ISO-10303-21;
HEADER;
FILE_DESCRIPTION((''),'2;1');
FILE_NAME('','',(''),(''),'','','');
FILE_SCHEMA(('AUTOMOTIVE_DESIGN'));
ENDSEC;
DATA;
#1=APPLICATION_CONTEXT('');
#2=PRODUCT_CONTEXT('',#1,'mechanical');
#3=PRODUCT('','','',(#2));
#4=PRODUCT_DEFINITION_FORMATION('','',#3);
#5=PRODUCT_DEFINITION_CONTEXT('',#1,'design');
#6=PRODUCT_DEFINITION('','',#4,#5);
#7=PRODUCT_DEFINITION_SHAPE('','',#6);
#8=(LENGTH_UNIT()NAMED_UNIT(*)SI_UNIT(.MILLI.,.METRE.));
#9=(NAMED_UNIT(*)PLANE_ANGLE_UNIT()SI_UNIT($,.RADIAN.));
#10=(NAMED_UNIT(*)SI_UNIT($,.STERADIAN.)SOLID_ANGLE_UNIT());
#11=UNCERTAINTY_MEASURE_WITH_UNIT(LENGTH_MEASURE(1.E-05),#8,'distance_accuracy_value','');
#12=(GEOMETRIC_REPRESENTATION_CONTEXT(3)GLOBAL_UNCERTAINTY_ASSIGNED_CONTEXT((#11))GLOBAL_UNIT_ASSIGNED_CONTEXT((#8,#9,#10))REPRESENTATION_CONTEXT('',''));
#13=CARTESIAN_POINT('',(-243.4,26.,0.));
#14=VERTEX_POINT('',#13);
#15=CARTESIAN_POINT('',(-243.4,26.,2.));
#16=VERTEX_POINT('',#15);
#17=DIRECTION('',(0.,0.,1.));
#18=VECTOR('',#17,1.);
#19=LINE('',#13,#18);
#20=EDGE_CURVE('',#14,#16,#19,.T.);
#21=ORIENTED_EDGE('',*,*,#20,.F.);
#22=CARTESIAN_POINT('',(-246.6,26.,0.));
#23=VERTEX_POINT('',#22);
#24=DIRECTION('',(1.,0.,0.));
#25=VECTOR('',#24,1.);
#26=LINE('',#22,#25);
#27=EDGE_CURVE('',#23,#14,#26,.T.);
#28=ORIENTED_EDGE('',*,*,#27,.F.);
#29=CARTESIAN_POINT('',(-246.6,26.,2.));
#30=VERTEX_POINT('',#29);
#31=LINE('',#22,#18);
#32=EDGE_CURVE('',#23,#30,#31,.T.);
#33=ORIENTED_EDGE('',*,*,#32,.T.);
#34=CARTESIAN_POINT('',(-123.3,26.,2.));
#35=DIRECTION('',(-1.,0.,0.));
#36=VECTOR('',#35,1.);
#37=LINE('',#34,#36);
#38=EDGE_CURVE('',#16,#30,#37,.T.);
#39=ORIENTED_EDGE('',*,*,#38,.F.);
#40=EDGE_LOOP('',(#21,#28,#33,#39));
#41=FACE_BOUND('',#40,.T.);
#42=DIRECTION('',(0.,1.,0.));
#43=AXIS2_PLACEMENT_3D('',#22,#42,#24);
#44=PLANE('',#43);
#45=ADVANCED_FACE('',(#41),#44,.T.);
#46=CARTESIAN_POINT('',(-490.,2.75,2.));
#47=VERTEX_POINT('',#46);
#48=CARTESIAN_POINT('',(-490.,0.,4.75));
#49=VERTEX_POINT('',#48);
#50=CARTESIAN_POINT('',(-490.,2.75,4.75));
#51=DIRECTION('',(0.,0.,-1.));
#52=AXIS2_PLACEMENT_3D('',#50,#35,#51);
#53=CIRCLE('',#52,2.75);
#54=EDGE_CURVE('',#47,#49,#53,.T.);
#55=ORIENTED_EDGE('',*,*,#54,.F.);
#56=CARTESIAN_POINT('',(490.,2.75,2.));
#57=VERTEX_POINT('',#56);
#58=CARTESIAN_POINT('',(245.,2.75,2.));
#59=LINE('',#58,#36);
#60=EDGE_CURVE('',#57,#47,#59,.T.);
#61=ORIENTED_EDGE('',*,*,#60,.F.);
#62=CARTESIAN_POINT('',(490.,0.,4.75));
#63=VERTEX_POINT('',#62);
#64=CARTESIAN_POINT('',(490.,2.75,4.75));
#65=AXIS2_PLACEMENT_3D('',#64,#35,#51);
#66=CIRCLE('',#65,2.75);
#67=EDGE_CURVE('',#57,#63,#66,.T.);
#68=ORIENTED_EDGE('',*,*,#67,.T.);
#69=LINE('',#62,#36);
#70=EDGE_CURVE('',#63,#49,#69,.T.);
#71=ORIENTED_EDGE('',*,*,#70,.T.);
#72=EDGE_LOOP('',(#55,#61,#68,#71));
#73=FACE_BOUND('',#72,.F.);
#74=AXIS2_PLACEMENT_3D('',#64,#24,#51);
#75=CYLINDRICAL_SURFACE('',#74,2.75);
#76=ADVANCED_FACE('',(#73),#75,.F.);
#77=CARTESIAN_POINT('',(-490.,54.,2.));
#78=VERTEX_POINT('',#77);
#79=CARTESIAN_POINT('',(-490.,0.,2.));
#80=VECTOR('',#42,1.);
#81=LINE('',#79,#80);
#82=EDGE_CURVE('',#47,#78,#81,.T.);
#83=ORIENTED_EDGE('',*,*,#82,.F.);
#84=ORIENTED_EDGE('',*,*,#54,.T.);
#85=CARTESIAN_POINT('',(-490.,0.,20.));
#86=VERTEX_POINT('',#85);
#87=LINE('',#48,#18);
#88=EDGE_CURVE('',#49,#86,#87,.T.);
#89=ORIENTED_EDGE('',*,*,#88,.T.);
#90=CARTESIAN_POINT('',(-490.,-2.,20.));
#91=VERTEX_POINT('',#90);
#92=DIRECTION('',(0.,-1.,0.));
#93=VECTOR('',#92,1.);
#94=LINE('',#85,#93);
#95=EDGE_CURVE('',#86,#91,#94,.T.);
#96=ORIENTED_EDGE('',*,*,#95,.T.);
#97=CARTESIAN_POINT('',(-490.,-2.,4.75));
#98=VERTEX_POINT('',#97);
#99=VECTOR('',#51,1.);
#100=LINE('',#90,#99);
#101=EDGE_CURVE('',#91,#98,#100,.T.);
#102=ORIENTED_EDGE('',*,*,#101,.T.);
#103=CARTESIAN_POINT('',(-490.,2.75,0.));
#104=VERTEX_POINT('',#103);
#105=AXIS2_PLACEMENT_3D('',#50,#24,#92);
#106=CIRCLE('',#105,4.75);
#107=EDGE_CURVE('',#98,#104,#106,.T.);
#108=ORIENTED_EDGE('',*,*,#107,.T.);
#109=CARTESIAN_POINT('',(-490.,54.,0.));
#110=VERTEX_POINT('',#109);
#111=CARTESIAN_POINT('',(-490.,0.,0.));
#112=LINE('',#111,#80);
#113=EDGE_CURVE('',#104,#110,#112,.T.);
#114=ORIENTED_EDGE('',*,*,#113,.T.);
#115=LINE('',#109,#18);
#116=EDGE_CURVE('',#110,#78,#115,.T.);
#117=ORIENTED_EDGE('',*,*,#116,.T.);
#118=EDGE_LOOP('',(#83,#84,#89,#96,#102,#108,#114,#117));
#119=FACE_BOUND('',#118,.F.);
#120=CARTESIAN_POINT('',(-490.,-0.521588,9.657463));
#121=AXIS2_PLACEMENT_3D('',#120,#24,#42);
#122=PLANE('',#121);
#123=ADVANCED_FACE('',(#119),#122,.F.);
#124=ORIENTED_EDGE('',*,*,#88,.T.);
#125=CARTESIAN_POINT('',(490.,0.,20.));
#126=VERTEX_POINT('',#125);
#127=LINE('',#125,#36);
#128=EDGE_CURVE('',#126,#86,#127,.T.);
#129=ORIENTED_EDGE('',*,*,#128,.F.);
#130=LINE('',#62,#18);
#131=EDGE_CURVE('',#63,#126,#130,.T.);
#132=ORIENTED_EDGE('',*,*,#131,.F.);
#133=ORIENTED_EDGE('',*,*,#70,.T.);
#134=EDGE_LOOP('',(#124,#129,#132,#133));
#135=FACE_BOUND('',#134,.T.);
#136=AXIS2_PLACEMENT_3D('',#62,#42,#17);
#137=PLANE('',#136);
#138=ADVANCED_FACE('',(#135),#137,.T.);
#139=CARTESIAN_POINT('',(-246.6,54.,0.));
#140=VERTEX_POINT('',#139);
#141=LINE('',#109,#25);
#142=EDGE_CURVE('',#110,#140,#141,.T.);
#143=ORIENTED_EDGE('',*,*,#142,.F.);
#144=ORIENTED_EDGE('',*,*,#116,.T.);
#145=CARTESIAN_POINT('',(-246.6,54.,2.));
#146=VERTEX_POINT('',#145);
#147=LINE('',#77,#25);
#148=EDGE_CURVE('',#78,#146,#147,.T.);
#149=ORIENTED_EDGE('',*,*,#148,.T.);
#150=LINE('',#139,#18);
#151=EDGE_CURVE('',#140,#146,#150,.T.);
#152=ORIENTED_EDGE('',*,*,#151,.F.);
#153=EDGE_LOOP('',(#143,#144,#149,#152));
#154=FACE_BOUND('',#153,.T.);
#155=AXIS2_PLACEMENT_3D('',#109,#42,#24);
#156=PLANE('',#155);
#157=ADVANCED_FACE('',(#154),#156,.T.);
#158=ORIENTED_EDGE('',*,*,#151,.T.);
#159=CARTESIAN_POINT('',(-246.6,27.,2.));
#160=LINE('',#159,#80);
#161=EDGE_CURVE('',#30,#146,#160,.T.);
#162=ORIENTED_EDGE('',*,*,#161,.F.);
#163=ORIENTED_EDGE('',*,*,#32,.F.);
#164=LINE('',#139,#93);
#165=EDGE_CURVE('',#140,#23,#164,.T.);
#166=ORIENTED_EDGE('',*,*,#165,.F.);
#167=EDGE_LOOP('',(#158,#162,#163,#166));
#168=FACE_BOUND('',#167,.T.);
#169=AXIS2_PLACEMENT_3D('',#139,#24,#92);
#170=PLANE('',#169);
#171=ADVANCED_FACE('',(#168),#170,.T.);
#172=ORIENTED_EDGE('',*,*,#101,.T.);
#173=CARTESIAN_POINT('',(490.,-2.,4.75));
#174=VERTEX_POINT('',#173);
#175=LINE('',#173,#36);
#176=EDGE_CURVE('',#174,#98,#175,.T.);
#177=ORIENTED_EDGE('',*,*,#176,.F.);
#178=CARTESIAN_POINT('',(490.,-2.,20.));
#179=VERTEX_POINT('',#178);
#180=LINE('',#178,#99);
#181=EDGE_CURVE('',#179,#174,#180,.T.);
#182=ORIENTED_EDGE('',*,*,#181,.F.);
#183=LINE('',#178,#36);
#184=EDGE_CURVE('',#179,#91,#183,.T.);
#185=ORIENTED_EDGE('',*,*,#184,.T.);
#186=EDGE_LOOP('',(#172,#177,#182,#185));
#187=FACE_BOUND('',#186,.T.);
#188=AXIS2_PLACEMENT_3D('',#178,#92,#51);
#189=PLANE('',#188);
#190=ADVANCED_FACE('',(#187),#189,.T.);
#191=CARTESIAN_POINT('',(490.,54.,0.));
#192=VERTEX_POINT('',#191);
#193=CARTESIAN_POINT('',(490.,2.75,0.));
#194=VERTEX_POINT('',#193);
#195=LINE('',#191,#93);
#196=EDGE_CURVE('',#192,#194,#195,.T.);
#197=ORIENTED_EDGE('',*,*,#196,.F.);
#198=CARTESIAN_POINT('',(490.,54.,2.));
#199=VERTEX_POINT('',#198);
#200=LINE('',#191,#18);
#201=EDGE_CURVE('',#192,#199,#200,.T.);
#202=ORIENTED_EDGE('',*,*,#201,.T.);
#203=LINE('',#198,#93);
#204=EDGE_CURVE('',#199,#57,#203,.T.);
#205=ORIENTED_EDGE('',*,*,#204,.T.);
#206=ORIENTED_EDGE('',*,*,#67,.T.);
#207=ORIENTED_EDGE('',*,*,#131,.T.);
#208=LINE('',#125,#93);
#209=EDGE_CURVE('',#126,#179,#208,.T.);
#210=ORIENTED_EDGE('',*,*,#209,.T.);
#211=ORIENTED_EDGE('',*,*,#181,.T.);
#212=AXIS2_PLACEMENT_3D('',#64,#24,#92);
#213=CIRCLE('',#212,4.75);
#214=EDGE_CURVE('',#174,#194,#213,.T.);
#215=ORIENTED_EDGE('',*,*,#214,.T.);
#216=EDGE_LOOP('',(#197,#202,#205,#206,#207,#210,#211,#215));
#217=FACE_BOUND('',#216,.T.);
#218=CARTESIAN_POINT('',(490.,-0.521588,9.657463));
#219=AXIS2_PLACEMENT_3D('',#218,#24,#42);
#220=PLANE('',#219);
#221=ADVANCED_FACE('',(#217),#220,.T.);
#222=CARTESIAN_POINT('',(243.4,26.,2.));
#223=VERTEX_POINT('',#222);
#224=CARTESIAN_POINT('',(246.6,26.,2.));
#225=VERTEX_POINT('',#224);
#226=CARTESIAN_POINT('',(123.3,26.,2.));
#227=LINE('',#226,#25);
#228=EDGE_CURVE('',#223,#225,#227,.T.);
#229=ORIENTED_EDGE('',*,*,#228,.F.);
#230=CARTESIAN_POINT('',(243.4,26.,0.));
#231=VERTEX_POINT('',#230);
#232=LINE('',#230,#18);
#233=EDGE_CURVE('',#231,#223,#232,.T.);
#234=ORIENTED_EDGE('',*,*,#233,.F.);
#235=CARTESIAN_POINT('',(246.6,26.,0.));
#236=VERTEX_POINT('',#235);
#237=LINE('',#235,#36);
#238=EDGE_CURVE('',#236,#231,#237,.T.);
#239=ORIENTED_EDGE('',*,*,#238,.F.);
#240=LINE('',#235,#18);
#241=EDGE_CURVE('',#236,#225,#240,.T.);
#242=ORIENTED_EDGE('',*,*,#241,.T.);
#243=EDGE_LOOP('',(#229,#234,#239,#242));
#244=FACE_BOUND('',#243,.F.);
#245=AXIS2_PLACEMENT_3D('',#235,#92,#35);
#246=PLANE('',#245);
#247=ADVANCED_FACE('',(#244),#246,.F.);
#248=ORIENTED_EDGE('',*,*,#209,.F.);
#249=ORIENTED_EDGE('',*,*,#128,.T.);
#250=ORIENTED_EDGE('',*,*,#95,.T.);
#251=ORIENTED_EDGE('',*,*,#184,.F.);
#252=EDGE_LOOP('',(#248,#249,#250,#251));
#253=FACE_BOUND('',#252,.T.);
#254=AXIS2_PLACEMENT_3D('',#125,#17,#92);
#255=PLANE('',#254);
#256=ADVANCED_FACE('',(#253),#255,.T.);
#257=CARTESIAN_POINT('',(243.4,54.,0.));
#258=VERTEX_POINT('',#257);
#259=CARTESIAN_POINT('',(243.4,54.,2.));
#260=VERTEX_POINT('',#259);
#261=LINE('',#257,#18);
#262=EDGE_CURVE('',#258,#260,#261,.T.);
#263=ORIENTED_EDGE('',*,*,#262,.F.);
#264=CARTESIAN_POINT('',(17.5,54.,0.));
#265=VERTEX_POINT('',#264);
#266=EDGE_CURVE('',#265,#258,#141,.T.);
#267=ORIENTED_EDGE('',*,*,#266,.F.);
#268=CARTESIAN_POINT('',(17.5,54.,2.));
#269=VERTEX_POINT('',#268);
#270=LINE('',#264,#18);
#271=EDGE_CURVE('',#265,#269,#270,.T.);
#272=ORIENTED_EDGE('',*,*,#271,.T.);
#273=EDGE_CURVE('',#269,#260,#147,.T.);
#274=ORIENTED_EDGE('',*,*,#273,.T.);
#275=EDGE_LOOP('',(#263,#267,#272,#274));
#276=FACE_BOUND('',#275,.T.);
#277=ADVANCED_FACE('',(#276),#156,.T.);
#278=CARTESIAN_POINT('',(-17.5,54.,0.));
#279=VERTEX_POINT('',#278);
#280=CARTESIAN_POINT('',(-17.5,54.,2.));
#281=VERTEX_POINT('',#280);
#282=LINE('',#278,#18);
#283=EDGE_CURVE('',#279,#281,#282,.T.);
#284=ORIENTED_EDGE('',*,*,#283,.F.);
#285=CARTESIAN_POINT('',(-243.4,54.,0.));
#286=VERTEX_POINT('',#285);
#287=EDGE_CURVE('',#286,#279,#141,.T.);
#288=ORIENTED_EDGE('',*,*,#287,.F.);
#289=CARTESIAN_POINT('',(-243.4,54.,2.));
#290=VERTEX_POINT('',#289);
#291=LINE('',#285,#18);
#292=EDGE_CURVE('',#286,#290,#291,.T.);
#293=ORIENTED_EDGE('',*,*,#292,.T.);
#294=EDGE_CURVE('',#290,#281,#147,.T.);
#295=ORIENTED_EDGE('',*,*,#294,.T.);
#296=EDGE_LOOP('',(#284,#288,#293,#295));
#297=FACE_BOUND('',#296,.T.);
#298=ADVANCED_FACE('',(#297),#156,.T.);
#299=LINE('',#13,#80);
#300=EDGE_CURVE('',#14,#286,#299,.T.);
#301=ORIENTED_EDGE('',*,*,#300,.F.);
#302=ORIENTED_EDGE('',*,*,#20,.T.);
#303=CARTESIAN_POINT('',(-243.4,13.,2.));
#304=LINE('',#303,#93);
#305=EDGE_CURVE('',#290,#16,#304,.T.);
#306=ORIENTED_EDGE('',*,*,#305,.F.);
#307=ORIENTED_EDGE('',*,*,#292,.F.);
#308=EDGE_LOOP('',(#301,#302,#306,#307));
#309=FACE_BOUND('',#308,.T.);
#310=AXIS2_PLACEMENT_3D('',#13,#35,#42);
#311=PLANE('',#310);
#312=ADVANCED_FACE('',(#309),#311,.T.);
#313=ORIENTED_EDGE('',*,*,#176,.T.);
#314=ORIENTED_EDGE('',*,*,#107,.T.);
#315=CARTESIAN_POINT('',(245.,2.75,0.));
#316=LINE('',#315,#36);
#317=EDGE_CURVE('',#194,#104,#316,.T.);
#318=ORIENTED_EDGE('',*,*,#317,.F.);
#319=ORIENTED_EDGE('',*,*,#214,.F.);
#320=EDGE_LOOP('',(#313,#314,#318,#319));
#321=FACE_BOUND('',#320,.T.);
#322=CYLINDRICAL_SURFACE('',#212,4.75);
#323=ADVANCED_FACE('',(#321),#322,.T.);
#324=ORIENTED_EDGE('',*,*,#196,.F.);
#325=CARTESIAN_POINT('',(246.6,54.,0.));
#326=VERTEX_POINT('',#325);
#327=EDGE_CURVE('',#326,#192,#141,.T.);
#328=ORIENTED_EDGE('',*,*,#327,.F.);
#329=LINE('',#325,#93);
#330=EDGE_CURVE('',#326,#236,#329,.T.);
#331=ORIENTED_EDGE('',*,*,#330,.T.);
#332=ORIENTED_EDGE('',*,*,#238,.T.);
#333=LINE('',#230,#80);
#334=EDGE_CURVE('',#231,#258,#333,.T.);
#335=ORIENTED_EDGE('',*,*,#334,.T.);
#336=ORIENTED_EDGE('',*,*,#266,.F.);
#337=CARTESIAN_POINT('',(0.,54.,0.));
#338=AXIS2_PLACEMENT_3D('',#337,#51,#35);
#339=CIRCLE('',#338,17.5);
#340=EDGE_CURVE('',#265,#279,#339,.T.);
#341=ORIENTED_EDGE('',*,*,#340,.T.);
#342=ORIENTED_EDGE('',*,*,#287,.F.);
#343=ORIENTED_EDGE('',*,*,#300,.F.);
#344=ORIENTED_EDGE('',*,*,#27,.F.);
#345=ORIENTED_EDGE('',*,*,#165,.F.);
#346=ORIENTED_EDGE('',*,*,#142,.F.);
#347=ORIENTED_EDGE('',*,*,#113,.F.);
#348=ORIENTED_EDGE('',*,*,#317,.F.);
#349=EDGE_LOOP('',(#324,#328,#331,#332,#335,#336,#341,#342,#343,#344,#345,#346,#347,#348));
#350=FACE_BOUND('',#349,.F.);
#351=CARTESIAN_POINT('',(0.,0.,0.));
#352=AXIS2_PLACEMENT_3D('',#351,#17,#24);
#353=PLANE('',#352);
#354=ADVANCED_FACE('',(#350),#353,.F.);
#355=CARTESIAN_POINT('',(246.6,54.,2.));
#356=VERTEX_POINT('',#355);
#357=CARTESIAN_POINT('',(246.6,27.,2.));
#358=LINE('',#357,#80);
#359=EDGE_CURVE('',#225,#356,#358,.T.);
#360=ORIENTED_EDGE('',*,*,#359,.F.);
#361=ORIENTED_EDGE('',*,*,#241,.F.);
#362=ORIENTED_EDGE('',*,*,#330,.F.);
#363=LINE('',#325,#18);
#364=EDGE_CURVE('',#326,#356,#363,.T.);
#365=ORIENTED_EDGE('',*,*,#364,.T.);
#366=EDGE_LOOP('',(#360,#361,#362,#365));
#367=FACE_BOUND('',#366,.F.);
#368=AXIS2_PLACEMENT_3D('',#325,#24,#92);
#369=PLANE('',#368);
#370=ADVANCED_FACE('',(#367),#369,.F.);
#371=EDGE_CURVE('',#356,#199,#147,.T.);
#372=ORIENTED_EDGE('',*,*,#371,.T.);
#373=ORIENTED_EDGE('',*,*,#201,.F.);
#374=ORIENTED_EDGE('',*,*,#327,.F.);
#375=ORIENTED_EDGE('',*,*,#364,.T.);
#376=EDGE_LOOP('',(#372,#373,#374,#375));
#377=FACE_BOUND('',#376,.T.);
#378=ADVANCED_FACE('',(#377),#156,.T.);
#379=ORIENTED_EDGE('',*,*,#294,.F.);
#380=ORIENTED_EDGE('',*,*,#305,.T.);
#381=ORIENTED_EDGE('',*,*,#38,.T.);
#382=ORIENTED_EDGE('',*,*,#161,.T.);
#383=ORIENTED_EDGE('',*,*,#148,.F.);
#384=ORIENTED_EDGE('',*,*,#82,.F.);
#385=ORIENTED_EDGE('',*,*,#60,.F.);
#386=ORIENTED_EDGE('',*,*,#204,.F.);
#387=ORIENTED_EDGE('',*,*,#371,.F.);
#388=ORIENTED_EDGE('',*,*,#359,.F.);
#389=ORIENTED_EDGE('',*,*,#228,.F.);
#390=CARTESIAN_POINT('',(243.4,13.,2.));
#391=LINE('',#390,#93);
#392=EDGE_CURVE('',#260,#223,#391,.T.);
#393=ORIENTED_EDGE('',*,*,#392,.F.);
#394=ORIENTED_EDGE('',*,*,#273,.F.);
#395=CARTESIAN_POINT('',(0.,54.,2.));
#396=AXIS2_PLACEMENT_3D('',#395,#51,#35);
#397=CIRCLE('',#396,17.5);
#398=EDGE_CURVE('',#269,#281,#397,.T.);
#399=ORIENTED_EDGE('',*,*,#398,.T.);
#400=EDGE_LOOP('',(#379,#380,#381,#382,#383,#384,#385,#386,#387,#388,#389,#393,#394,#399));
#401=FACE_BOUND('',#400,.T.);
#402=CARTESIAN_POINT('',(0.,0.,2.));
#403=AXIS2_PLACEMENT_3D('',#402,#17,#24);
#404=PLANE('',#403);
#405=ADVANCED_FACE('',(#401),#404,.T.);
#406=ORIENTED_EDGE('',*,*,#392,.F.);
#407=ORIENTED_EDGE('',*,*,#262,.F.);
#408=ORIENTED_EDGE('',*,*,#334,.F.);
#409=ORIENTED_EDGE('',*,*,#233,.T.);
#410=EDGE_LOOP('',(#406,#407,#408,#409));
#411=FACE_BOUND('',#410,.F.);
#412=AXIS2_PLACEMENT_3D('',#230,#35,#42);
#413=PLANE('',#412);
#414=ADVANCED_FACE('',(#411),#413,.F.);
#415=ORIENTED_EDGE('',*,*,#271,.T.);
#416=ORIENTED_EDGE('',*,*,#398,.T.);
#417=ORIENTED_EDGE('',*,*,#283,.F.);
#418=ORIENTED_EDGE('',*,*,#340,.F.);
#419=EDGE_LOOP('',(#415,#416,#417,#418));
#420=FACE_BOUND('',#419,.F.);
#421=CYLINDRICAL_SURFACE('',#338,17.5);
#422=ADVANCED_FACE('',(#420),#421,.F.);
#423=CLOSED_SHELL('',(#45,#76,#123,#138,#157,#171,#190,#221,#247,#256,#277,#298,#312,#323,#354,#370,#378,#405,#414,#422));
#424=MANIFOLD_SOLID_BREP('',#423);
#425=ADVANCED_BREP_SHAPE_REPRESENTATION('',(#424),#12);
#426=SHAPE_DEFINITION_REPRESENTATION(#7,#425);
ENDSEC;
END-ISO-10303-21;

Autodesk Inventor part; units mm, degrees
ref_plane "YZ Plane" through (0, 0, 0) normal (1, 0, 0) x (0, 1, 0)
ref_plane "XZ Plane" through (0, 0, 0) normal (0, 1, 0) x (-1, 0, 0)
ref_plane "XY Plane" through (0, 0, 0) normal (0, 0, 1) x (1, 0, 0)
sketch "Sketch1" plane through (0, 0, 0) normal (0, 0, 1) x (1, 0, 0)
  line L0 (-490, 54) -> (490, 54)
  line L1 (490, 54) -> (490, 0)
  line L2 (490, 0) -> (-490, 0)
  line L3 (-490, 0) -> (-490, 54)
  point P0 (0, 0)
  point P1 (0, 0)
  dimension "d0" = 980
  dimension "d1" = 54
extrude "Plate1" add sketch "Sketch1" along normal blind 2
sketch "Sketch2" plane through (490, -2, 0) normal (0, 1, 0) x (-1, 0, 0)
  line L0 (980, 0) -> (0, 0)
  line L1 (0, 0) -> (0, 20)
  line L2 (0, 20) -> (980, 20)
  line L3 (980, 20) -> (980, 0)
edge flange "Flange1" height 20 angle 90 thickness 2 bend radius 2.75 thickness toward (0, 1, 0) relief round relief width 2 relief depth 1 edges at (0, 0, 2) wall of the first edge with corners at (-490, -2, 0) (490, -2, 0) (490, -2, 20) (-490, -2, 20)
bend "Bend1"
corner "Corner1"
sketch "Sketch5" plane through (0, 0, 0) normal (0, 0, -1) x (-1, 0, 0)
  line L0 (490, 54) -> (-490, 54) projected
  line L1 (490, -2) -> (-490, -2) projected
  circle A0 centre (0, 54) radius 17.5
  line L2 (243.4, 54) -> (246.6, 54)
  line L3 (246.6, 54) -> (246.6, 26)
  line L4 (246.6, 26) -> (243.4, 26)
  line L5 (243.4, 26) -> (243.4, 54)
  line L6 (-243.4, 54) -> (-246.6, 54)
  line L7 (-246.6, 54) -> (-246.6, 26)
  line L8 (-246.6, 26) -> (-243.4, 26)
  line L9 (-243.4, 26) -> (-243.4, 54)
  line L10 (0, 54) -> (0, -2) construction
  point P0 (0, 0)
  point P1 (-490, -2)
  point P2 (245, 26)
  point P3 (-245, 26)
  point P4 (246.6, 54)
  point P5 (-17.5, 54)
  point P6 (17.5, 54)
  point P7 (-246.6, 54)
  dimension "d45" = 35
  dimension "d48" = 3.2
  dimension "d49" = 490
  dimension "d51" = 28
  dimension "d52" = 28
extrude "Extrusion1" cut sketch "Sketch5" against normal through all contours L3 L4 L5 L0 | L9 L8 L7 L0 | A0 L0 picked at (-2.238, 47.1497)
sketch "Sketch9" plane through (0, 0, 2) normal (0, 0, 1) x (1, 0, 0)
  line L0 (485.6141, 29.596) -> (485.6141, 17.596) construction
  line L1 (485.6141, 17.596) -> (285.6141, 17.596) construction
  line L2 (285.6141, 17.596) -> (285.6141, 29.596) construction
  line L3 (285.6141, 29.596) -> (485.6141, 29.596) construction
  line L4 (-490, 54) -> (490, 54) projected
  point P0 (0, 0)
  point P1 (1.05, 68)
  point P2 (490, 54)
  dimension "d40" = 200
  dimension "d41" = 12
mark "Mark2"
equation "\"d2\" = Thickness"
equation "\"d3\" = BendReliefWidth"
equation "\"d4\" = BendReliefDepth"
equation "\"d5\" = MinimumRemnant"
equation "\"d6\" = TransitionRadius"
equation "\"d9\" = BendRadius"
equation "\"d10\" = CornerReliefSize"
equation "\"d11\" = GapSize"
equation "\"d12\" = JacobiRadiusSize"
equation "\"BendReliefWidth\" = Thickness"
equation "\"BendReliefDepth\" = 0.5 * Thickness"
equation "\"CornerReliefSize\" = 4 * Thickness"
equation "\"MinimumRemnant\" = 2 * Thickness"
equation "\"TransitionRadius\" = BendRadius"
equation "\"JacobiRadiusSize\" = BendRadius"
equation "\"GapSize\" = Thickness"
equation "\"Thickness\" = 2"
equation "\"BendRadius\" = 2.75"
properties part number "MSC 329 STRINGER BOARD  ###" material "Stainless Steel"
